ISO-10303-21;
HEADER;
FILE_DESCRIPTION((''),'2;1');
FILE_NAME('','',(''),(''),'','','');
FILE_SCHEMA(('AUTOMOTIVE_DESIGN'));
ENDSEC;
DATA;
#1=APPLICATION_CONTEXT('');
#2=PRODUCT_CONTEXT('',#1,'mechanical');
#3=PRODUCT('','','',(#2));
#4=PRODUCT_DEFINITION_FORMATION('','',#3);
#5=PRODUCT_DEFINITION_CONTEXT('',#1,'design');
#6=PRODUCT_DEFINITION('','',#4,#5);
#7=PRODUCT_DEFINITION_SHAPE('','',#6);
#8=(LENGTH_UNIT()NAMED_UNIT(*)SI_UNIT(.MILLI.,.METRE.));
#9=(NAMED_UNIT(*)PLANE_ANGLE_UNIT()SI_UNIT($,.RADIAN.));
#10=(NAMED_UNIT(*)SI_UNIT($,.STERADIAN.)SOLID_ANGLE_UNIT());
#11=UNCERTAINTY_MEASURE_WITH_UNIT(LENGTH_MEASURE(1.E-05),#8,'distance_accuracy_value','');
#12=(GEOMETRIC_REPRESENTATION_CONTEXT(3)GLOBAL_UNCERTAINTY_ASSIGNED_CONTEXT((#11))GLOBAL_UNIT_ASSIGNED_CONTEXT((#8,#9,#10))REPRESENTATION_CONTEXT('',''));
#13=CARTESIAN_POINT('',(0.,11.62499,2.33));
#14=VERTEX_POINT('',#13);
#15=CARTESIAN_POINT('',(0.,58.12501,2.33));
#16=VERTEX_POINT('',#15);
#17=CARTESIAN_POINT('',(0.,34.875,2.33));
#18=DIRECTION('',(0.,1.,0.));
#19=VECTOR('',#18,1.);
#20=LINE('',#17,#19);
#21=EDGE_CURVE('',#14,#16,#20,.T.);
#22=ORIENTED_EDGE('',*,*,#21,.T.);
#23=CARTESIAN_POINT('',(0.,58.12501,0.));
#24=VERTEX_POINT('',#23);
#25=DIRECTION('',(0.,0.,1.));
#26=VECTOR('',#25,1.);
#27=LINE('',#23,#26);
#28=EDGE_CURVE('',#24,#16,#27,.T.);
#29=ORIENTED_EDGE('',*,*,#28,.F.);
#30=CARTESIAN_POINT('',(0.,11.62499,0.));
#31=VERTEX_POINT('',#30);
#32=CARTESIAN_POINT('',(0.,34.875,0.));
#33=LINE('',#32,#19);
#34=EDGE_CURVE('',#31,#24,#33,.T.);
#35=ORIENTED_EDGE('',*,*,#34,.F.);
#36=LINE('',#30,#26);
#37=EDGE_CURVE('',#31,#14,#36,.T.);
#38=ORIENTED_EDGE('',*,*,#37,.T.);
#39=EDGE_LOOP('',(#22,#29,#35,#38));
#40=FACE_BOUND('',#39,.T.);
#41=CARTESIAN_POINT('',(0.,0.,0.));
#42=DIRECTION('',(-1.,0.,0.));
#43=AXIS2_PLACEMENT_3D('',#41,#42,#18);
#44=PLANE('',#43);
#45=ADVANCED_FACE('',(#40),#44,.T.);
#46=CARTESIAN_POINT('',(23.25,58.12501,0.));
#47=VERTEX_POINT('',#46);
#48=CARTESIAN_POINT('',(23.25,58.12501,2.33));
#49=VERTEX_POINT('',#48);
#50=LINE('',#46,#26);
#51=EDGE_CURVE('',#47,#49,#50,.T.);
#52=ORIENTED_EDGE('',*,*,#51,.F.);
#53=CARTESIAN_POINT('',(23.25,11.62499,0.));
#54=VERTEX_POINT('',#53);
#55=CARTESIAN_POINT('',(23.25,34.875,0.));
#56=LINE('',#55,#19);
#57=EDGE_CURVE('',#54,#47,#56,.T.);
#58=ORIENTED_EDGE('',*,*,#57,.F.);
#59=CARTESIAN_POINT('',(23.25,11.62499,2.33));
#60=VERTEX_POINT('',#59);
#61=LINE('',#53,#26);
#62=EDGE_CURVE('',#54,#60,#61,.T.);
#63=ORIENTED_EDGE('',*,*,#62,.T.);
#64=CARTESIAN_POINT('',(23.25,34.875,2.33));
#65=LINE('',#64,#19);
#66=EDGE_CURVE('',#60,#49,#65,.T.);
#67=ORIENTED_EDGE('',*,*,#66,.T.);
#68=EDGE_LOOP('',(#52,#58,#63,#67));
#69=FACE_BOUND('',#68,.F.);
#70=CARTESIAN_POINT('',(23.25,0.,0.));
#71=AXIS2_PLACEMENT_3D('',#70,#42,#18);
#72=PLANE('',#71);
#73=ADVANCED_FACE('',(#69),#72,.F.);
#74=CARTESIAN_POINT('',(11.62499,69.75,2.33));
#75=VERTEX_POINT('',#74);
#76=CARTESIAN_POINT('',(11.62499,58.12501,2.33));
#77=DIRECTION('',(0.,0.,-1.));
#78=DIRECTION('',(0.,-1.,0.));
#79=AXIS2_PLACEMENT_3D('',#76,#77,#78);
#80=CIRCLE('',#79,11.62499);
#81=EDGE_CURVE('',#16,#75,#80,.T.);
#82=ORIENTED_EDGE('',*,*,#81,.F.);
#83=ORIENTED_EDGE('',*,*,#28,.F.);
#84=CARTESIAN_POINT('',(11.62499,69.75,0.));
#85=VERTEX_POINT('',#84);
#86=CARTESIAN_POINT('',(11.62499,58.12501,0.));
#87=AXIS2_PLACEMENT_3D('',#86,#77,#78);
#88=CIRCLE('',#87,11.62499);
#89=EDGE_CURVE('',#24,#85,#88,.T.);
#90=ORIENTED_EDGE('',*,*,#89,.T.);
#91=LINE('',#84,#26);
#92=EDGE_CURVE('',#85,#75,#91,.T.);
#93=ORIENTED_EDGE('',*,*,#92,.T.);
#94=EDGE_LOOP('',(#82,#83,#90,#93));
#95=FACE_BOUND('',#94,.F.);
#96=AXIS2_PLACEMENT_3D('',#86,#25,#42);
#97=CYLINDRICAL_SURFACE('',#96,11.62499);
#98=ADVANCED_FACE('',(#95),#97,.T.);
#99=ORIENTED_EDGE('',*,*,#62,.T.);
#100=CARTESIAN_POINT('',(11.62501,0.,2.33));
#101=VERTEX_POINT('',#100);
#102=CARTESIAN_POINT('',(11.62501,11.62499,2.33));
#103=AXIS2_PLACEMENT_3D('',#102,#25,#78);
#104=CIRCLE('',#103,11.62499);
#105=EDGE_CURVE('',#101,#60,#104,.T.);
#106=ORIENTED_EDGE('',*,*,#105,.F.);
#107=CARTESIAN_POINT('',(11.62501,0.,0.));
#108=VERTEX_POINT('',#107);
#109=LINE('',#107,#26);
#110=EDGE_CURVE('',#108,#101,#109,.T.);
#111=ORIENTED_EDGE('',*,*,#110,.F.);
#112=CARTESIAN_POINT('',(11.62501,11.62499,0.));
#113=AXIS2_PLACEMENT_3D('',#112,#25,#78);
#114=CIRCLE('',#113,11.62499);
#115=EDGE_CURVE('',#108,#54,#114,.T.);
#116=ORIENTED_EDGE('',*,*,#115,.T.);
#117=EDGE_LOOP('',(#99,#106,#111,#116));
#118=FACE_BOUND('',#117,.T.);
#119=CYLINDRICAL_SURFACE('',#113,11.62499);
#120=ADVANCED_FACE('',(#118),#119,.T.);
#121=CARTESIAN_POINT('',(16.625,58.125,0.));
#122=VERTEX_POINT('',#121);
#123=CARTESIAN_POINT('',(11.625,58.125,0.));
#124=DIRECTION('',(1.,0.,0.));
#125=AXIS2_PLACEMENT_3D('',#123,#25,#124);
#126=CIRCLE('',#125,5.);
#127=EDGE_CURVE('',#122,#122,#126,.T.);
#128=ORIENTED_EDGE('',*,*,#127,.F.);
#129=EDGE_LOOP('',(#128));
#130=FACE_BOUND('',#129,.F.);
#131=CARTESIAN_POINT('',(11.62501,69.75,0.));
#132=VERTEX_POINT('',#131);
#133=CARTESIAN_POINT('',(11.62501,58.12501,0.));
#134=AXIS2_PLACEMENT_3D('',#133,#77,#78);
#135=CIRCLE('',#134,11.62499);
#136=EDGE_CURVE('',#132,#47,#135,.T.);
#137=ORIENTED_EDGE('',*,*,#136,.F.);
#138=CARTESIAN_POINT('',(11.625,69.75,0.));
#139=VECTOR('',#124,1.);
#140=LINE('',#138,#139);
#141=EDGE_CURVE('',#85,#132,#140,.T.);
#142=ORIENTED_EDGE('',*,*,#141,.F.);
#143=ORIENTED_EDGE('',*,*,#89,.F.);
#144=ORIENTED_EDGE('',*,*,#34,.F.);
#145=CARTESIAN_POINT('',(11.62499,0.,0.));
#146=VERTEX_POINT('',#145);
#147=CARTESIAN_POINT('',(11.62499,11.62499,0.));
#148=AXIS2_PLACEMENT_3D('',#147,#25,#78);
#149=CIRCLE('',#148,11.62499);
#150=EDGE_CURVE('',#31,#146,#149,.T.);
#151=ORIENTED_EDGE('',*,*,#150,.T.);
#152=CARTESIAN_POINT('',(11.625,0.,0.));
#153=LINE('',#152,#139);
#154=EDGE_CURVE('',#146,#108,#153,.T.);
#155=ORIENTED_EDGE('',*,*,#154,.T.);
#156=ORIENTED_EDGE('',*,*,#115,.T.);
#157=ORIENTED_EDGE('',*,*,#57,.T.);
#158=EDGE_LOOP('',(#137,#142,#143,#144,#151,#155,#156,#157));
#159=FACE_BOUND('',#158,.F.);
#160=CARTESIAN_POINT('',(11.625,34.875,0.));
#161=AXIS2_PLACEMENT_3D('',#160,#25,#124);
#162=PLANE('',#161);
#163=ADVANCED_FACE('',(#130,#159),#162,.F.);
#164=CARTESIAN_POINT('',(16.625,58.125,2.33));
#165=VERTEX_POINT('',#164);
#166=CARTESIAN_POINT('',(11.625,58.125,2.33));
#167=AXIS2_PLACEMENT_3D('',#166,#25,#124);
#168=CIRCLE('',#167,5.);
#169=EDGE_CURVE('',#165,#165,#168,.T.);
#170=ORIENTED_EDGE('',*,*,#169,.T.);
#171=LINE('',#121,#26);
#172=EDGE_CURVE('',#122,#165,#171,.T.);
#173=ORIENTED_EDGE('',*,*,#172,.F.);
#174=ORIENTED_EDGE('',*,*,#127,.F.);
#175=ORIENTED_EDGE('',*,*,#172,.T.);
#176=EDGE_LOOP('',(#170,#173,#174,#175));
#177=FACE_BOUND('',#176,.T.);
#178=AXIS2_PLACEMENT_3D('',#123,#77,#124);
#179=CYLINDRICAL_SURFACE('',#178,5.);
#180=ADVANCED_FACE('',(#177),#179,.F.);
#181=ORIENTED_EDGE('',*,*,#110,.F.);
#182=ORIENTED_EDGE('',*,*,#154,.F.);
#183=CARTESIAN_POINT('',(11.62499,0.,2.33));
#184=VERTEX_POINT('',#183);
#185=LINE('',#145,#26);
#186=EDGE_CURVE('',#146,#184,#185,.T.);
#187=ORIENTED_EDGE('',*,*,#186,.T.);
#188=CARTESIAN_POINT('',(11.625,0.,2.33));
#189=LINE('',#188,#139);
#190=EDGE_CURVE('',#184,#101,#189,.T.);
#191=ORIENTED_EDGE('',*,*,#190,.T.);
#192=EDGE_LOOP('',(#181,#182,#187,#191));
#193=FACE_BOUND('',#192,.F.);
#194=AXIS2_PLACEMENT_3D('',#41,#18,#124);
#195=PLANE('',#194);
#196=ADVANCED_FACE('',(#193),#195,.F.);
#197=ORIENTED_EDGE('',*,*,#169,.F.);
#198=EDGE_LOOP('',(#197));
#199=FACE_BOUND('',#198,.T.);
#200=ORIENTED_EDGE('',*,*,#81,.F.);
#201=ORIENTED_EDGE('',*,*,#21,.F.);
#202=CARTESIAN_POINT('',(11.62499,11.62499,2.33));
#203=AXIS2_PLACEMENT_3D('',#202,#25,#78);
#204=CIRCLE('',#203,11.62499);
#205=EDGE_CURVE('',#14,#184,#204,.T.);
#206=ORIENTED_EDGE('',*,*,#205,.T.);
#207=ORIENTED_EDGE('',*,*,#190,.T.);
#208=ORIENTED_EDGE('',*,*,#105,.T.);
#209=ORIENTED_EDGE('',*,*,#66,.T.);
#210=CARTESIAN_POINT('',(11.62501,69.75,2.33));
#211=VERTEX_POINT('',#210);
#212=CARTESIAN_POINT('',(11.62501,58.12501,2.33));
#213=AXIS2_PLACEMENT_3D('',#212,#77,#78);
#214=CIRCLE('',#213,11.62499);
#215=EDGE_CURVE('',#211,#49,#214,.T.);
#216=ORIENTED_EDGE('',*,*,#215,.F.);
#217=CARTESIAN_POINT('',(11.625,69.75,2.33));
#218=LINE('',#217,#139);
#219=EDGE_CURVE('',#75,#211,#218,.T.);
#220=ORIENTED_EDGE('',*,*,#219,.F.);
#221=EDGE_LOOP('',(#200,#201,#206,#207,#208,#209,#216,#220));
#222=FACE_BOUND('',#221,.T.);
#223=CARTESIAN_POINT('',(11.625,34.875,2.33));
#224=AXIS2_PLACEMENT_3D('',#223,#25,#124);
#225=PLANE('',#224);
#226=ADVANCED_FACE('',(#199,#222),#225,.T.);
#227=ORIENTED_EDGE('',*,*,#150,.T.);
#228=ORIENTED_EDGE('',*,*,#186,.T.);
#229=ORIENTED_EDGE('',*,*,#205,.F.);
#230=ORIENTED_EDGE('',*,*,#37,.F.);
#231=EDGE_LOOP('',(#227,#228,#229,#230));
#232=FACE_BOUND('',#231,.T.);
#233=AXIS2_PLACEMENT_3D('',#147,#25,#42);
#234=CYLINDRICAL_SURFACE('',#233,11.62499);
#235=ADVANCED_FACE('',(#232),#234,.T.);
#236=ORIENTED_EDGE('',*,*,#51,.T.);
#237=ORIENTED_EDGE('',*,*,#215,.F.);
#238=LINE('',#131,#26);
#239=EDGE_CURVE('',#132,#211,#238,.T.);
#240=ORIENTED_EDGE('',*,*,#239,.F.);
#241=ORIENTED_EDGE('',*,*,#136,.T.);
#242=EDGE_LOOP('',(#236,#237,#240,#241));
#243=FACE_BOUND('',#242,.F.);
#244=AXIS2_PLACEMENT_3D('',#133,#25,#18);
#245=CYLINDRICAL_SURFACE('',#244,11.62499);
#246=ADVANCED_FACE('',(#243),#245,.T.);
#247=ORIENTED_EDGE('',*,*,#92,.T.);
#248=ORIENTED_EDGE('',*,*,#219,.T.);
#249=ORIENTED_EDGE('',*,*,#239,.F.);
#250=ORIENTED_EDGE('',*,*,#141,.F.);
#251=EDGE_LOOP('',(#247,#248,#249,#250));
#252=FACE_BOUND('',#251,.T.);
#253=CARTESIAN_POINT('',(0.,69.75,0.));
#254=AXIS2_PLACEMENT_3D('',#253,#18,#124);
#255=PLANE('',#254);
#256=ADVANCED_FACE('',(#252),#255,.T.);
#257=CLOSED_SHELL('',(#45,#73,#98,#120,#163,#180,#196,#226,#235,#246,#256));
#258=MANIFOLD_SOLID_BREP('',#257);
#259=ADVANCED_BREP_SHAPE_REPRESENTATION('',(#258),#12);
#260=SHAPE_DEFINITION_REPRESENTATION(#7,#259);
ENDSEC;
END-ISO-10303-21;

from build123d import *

# Parameters (mm, degrees)
F0_W     = 23.25
F0_H     = 69.75
F0_R     = 5
F1_DEPTH = 2.33
F2_R     = 11.62499


# Not quite as in the source:
# - a fillet or chamfer is up to 0.001 mm smaller than in the source, because OpenCascade refuses the exact size


with BuildPart() as f1:
    # F0 (on Top) → F1 (new body)
    with BuildSketch(Plane.XY):
        with Locations((11.625, 34.875)):
            Rectangle(F0_W, F0_H)
        with Locations((11.625, 58.125)):
            Circle(F0_R, mode=Mode.SUBTRACT)
    extrude(amount=F1_DEPTH)

    # F2 (radius 11.625 in the source; OpenCascade refuses exactly that, so slightly less here)
    f2_edges = [f1.edges().sort_by_distance(p)[0] for p in [
        (23.25, 0, 1.165),
        (0, 0, 1.165),
        (0, 69.75, 1.165),
        (23.25, 69.75, 1.165),
    ]]
    fillet(f2_edges, radius=F2_R)


solid = f1.part
